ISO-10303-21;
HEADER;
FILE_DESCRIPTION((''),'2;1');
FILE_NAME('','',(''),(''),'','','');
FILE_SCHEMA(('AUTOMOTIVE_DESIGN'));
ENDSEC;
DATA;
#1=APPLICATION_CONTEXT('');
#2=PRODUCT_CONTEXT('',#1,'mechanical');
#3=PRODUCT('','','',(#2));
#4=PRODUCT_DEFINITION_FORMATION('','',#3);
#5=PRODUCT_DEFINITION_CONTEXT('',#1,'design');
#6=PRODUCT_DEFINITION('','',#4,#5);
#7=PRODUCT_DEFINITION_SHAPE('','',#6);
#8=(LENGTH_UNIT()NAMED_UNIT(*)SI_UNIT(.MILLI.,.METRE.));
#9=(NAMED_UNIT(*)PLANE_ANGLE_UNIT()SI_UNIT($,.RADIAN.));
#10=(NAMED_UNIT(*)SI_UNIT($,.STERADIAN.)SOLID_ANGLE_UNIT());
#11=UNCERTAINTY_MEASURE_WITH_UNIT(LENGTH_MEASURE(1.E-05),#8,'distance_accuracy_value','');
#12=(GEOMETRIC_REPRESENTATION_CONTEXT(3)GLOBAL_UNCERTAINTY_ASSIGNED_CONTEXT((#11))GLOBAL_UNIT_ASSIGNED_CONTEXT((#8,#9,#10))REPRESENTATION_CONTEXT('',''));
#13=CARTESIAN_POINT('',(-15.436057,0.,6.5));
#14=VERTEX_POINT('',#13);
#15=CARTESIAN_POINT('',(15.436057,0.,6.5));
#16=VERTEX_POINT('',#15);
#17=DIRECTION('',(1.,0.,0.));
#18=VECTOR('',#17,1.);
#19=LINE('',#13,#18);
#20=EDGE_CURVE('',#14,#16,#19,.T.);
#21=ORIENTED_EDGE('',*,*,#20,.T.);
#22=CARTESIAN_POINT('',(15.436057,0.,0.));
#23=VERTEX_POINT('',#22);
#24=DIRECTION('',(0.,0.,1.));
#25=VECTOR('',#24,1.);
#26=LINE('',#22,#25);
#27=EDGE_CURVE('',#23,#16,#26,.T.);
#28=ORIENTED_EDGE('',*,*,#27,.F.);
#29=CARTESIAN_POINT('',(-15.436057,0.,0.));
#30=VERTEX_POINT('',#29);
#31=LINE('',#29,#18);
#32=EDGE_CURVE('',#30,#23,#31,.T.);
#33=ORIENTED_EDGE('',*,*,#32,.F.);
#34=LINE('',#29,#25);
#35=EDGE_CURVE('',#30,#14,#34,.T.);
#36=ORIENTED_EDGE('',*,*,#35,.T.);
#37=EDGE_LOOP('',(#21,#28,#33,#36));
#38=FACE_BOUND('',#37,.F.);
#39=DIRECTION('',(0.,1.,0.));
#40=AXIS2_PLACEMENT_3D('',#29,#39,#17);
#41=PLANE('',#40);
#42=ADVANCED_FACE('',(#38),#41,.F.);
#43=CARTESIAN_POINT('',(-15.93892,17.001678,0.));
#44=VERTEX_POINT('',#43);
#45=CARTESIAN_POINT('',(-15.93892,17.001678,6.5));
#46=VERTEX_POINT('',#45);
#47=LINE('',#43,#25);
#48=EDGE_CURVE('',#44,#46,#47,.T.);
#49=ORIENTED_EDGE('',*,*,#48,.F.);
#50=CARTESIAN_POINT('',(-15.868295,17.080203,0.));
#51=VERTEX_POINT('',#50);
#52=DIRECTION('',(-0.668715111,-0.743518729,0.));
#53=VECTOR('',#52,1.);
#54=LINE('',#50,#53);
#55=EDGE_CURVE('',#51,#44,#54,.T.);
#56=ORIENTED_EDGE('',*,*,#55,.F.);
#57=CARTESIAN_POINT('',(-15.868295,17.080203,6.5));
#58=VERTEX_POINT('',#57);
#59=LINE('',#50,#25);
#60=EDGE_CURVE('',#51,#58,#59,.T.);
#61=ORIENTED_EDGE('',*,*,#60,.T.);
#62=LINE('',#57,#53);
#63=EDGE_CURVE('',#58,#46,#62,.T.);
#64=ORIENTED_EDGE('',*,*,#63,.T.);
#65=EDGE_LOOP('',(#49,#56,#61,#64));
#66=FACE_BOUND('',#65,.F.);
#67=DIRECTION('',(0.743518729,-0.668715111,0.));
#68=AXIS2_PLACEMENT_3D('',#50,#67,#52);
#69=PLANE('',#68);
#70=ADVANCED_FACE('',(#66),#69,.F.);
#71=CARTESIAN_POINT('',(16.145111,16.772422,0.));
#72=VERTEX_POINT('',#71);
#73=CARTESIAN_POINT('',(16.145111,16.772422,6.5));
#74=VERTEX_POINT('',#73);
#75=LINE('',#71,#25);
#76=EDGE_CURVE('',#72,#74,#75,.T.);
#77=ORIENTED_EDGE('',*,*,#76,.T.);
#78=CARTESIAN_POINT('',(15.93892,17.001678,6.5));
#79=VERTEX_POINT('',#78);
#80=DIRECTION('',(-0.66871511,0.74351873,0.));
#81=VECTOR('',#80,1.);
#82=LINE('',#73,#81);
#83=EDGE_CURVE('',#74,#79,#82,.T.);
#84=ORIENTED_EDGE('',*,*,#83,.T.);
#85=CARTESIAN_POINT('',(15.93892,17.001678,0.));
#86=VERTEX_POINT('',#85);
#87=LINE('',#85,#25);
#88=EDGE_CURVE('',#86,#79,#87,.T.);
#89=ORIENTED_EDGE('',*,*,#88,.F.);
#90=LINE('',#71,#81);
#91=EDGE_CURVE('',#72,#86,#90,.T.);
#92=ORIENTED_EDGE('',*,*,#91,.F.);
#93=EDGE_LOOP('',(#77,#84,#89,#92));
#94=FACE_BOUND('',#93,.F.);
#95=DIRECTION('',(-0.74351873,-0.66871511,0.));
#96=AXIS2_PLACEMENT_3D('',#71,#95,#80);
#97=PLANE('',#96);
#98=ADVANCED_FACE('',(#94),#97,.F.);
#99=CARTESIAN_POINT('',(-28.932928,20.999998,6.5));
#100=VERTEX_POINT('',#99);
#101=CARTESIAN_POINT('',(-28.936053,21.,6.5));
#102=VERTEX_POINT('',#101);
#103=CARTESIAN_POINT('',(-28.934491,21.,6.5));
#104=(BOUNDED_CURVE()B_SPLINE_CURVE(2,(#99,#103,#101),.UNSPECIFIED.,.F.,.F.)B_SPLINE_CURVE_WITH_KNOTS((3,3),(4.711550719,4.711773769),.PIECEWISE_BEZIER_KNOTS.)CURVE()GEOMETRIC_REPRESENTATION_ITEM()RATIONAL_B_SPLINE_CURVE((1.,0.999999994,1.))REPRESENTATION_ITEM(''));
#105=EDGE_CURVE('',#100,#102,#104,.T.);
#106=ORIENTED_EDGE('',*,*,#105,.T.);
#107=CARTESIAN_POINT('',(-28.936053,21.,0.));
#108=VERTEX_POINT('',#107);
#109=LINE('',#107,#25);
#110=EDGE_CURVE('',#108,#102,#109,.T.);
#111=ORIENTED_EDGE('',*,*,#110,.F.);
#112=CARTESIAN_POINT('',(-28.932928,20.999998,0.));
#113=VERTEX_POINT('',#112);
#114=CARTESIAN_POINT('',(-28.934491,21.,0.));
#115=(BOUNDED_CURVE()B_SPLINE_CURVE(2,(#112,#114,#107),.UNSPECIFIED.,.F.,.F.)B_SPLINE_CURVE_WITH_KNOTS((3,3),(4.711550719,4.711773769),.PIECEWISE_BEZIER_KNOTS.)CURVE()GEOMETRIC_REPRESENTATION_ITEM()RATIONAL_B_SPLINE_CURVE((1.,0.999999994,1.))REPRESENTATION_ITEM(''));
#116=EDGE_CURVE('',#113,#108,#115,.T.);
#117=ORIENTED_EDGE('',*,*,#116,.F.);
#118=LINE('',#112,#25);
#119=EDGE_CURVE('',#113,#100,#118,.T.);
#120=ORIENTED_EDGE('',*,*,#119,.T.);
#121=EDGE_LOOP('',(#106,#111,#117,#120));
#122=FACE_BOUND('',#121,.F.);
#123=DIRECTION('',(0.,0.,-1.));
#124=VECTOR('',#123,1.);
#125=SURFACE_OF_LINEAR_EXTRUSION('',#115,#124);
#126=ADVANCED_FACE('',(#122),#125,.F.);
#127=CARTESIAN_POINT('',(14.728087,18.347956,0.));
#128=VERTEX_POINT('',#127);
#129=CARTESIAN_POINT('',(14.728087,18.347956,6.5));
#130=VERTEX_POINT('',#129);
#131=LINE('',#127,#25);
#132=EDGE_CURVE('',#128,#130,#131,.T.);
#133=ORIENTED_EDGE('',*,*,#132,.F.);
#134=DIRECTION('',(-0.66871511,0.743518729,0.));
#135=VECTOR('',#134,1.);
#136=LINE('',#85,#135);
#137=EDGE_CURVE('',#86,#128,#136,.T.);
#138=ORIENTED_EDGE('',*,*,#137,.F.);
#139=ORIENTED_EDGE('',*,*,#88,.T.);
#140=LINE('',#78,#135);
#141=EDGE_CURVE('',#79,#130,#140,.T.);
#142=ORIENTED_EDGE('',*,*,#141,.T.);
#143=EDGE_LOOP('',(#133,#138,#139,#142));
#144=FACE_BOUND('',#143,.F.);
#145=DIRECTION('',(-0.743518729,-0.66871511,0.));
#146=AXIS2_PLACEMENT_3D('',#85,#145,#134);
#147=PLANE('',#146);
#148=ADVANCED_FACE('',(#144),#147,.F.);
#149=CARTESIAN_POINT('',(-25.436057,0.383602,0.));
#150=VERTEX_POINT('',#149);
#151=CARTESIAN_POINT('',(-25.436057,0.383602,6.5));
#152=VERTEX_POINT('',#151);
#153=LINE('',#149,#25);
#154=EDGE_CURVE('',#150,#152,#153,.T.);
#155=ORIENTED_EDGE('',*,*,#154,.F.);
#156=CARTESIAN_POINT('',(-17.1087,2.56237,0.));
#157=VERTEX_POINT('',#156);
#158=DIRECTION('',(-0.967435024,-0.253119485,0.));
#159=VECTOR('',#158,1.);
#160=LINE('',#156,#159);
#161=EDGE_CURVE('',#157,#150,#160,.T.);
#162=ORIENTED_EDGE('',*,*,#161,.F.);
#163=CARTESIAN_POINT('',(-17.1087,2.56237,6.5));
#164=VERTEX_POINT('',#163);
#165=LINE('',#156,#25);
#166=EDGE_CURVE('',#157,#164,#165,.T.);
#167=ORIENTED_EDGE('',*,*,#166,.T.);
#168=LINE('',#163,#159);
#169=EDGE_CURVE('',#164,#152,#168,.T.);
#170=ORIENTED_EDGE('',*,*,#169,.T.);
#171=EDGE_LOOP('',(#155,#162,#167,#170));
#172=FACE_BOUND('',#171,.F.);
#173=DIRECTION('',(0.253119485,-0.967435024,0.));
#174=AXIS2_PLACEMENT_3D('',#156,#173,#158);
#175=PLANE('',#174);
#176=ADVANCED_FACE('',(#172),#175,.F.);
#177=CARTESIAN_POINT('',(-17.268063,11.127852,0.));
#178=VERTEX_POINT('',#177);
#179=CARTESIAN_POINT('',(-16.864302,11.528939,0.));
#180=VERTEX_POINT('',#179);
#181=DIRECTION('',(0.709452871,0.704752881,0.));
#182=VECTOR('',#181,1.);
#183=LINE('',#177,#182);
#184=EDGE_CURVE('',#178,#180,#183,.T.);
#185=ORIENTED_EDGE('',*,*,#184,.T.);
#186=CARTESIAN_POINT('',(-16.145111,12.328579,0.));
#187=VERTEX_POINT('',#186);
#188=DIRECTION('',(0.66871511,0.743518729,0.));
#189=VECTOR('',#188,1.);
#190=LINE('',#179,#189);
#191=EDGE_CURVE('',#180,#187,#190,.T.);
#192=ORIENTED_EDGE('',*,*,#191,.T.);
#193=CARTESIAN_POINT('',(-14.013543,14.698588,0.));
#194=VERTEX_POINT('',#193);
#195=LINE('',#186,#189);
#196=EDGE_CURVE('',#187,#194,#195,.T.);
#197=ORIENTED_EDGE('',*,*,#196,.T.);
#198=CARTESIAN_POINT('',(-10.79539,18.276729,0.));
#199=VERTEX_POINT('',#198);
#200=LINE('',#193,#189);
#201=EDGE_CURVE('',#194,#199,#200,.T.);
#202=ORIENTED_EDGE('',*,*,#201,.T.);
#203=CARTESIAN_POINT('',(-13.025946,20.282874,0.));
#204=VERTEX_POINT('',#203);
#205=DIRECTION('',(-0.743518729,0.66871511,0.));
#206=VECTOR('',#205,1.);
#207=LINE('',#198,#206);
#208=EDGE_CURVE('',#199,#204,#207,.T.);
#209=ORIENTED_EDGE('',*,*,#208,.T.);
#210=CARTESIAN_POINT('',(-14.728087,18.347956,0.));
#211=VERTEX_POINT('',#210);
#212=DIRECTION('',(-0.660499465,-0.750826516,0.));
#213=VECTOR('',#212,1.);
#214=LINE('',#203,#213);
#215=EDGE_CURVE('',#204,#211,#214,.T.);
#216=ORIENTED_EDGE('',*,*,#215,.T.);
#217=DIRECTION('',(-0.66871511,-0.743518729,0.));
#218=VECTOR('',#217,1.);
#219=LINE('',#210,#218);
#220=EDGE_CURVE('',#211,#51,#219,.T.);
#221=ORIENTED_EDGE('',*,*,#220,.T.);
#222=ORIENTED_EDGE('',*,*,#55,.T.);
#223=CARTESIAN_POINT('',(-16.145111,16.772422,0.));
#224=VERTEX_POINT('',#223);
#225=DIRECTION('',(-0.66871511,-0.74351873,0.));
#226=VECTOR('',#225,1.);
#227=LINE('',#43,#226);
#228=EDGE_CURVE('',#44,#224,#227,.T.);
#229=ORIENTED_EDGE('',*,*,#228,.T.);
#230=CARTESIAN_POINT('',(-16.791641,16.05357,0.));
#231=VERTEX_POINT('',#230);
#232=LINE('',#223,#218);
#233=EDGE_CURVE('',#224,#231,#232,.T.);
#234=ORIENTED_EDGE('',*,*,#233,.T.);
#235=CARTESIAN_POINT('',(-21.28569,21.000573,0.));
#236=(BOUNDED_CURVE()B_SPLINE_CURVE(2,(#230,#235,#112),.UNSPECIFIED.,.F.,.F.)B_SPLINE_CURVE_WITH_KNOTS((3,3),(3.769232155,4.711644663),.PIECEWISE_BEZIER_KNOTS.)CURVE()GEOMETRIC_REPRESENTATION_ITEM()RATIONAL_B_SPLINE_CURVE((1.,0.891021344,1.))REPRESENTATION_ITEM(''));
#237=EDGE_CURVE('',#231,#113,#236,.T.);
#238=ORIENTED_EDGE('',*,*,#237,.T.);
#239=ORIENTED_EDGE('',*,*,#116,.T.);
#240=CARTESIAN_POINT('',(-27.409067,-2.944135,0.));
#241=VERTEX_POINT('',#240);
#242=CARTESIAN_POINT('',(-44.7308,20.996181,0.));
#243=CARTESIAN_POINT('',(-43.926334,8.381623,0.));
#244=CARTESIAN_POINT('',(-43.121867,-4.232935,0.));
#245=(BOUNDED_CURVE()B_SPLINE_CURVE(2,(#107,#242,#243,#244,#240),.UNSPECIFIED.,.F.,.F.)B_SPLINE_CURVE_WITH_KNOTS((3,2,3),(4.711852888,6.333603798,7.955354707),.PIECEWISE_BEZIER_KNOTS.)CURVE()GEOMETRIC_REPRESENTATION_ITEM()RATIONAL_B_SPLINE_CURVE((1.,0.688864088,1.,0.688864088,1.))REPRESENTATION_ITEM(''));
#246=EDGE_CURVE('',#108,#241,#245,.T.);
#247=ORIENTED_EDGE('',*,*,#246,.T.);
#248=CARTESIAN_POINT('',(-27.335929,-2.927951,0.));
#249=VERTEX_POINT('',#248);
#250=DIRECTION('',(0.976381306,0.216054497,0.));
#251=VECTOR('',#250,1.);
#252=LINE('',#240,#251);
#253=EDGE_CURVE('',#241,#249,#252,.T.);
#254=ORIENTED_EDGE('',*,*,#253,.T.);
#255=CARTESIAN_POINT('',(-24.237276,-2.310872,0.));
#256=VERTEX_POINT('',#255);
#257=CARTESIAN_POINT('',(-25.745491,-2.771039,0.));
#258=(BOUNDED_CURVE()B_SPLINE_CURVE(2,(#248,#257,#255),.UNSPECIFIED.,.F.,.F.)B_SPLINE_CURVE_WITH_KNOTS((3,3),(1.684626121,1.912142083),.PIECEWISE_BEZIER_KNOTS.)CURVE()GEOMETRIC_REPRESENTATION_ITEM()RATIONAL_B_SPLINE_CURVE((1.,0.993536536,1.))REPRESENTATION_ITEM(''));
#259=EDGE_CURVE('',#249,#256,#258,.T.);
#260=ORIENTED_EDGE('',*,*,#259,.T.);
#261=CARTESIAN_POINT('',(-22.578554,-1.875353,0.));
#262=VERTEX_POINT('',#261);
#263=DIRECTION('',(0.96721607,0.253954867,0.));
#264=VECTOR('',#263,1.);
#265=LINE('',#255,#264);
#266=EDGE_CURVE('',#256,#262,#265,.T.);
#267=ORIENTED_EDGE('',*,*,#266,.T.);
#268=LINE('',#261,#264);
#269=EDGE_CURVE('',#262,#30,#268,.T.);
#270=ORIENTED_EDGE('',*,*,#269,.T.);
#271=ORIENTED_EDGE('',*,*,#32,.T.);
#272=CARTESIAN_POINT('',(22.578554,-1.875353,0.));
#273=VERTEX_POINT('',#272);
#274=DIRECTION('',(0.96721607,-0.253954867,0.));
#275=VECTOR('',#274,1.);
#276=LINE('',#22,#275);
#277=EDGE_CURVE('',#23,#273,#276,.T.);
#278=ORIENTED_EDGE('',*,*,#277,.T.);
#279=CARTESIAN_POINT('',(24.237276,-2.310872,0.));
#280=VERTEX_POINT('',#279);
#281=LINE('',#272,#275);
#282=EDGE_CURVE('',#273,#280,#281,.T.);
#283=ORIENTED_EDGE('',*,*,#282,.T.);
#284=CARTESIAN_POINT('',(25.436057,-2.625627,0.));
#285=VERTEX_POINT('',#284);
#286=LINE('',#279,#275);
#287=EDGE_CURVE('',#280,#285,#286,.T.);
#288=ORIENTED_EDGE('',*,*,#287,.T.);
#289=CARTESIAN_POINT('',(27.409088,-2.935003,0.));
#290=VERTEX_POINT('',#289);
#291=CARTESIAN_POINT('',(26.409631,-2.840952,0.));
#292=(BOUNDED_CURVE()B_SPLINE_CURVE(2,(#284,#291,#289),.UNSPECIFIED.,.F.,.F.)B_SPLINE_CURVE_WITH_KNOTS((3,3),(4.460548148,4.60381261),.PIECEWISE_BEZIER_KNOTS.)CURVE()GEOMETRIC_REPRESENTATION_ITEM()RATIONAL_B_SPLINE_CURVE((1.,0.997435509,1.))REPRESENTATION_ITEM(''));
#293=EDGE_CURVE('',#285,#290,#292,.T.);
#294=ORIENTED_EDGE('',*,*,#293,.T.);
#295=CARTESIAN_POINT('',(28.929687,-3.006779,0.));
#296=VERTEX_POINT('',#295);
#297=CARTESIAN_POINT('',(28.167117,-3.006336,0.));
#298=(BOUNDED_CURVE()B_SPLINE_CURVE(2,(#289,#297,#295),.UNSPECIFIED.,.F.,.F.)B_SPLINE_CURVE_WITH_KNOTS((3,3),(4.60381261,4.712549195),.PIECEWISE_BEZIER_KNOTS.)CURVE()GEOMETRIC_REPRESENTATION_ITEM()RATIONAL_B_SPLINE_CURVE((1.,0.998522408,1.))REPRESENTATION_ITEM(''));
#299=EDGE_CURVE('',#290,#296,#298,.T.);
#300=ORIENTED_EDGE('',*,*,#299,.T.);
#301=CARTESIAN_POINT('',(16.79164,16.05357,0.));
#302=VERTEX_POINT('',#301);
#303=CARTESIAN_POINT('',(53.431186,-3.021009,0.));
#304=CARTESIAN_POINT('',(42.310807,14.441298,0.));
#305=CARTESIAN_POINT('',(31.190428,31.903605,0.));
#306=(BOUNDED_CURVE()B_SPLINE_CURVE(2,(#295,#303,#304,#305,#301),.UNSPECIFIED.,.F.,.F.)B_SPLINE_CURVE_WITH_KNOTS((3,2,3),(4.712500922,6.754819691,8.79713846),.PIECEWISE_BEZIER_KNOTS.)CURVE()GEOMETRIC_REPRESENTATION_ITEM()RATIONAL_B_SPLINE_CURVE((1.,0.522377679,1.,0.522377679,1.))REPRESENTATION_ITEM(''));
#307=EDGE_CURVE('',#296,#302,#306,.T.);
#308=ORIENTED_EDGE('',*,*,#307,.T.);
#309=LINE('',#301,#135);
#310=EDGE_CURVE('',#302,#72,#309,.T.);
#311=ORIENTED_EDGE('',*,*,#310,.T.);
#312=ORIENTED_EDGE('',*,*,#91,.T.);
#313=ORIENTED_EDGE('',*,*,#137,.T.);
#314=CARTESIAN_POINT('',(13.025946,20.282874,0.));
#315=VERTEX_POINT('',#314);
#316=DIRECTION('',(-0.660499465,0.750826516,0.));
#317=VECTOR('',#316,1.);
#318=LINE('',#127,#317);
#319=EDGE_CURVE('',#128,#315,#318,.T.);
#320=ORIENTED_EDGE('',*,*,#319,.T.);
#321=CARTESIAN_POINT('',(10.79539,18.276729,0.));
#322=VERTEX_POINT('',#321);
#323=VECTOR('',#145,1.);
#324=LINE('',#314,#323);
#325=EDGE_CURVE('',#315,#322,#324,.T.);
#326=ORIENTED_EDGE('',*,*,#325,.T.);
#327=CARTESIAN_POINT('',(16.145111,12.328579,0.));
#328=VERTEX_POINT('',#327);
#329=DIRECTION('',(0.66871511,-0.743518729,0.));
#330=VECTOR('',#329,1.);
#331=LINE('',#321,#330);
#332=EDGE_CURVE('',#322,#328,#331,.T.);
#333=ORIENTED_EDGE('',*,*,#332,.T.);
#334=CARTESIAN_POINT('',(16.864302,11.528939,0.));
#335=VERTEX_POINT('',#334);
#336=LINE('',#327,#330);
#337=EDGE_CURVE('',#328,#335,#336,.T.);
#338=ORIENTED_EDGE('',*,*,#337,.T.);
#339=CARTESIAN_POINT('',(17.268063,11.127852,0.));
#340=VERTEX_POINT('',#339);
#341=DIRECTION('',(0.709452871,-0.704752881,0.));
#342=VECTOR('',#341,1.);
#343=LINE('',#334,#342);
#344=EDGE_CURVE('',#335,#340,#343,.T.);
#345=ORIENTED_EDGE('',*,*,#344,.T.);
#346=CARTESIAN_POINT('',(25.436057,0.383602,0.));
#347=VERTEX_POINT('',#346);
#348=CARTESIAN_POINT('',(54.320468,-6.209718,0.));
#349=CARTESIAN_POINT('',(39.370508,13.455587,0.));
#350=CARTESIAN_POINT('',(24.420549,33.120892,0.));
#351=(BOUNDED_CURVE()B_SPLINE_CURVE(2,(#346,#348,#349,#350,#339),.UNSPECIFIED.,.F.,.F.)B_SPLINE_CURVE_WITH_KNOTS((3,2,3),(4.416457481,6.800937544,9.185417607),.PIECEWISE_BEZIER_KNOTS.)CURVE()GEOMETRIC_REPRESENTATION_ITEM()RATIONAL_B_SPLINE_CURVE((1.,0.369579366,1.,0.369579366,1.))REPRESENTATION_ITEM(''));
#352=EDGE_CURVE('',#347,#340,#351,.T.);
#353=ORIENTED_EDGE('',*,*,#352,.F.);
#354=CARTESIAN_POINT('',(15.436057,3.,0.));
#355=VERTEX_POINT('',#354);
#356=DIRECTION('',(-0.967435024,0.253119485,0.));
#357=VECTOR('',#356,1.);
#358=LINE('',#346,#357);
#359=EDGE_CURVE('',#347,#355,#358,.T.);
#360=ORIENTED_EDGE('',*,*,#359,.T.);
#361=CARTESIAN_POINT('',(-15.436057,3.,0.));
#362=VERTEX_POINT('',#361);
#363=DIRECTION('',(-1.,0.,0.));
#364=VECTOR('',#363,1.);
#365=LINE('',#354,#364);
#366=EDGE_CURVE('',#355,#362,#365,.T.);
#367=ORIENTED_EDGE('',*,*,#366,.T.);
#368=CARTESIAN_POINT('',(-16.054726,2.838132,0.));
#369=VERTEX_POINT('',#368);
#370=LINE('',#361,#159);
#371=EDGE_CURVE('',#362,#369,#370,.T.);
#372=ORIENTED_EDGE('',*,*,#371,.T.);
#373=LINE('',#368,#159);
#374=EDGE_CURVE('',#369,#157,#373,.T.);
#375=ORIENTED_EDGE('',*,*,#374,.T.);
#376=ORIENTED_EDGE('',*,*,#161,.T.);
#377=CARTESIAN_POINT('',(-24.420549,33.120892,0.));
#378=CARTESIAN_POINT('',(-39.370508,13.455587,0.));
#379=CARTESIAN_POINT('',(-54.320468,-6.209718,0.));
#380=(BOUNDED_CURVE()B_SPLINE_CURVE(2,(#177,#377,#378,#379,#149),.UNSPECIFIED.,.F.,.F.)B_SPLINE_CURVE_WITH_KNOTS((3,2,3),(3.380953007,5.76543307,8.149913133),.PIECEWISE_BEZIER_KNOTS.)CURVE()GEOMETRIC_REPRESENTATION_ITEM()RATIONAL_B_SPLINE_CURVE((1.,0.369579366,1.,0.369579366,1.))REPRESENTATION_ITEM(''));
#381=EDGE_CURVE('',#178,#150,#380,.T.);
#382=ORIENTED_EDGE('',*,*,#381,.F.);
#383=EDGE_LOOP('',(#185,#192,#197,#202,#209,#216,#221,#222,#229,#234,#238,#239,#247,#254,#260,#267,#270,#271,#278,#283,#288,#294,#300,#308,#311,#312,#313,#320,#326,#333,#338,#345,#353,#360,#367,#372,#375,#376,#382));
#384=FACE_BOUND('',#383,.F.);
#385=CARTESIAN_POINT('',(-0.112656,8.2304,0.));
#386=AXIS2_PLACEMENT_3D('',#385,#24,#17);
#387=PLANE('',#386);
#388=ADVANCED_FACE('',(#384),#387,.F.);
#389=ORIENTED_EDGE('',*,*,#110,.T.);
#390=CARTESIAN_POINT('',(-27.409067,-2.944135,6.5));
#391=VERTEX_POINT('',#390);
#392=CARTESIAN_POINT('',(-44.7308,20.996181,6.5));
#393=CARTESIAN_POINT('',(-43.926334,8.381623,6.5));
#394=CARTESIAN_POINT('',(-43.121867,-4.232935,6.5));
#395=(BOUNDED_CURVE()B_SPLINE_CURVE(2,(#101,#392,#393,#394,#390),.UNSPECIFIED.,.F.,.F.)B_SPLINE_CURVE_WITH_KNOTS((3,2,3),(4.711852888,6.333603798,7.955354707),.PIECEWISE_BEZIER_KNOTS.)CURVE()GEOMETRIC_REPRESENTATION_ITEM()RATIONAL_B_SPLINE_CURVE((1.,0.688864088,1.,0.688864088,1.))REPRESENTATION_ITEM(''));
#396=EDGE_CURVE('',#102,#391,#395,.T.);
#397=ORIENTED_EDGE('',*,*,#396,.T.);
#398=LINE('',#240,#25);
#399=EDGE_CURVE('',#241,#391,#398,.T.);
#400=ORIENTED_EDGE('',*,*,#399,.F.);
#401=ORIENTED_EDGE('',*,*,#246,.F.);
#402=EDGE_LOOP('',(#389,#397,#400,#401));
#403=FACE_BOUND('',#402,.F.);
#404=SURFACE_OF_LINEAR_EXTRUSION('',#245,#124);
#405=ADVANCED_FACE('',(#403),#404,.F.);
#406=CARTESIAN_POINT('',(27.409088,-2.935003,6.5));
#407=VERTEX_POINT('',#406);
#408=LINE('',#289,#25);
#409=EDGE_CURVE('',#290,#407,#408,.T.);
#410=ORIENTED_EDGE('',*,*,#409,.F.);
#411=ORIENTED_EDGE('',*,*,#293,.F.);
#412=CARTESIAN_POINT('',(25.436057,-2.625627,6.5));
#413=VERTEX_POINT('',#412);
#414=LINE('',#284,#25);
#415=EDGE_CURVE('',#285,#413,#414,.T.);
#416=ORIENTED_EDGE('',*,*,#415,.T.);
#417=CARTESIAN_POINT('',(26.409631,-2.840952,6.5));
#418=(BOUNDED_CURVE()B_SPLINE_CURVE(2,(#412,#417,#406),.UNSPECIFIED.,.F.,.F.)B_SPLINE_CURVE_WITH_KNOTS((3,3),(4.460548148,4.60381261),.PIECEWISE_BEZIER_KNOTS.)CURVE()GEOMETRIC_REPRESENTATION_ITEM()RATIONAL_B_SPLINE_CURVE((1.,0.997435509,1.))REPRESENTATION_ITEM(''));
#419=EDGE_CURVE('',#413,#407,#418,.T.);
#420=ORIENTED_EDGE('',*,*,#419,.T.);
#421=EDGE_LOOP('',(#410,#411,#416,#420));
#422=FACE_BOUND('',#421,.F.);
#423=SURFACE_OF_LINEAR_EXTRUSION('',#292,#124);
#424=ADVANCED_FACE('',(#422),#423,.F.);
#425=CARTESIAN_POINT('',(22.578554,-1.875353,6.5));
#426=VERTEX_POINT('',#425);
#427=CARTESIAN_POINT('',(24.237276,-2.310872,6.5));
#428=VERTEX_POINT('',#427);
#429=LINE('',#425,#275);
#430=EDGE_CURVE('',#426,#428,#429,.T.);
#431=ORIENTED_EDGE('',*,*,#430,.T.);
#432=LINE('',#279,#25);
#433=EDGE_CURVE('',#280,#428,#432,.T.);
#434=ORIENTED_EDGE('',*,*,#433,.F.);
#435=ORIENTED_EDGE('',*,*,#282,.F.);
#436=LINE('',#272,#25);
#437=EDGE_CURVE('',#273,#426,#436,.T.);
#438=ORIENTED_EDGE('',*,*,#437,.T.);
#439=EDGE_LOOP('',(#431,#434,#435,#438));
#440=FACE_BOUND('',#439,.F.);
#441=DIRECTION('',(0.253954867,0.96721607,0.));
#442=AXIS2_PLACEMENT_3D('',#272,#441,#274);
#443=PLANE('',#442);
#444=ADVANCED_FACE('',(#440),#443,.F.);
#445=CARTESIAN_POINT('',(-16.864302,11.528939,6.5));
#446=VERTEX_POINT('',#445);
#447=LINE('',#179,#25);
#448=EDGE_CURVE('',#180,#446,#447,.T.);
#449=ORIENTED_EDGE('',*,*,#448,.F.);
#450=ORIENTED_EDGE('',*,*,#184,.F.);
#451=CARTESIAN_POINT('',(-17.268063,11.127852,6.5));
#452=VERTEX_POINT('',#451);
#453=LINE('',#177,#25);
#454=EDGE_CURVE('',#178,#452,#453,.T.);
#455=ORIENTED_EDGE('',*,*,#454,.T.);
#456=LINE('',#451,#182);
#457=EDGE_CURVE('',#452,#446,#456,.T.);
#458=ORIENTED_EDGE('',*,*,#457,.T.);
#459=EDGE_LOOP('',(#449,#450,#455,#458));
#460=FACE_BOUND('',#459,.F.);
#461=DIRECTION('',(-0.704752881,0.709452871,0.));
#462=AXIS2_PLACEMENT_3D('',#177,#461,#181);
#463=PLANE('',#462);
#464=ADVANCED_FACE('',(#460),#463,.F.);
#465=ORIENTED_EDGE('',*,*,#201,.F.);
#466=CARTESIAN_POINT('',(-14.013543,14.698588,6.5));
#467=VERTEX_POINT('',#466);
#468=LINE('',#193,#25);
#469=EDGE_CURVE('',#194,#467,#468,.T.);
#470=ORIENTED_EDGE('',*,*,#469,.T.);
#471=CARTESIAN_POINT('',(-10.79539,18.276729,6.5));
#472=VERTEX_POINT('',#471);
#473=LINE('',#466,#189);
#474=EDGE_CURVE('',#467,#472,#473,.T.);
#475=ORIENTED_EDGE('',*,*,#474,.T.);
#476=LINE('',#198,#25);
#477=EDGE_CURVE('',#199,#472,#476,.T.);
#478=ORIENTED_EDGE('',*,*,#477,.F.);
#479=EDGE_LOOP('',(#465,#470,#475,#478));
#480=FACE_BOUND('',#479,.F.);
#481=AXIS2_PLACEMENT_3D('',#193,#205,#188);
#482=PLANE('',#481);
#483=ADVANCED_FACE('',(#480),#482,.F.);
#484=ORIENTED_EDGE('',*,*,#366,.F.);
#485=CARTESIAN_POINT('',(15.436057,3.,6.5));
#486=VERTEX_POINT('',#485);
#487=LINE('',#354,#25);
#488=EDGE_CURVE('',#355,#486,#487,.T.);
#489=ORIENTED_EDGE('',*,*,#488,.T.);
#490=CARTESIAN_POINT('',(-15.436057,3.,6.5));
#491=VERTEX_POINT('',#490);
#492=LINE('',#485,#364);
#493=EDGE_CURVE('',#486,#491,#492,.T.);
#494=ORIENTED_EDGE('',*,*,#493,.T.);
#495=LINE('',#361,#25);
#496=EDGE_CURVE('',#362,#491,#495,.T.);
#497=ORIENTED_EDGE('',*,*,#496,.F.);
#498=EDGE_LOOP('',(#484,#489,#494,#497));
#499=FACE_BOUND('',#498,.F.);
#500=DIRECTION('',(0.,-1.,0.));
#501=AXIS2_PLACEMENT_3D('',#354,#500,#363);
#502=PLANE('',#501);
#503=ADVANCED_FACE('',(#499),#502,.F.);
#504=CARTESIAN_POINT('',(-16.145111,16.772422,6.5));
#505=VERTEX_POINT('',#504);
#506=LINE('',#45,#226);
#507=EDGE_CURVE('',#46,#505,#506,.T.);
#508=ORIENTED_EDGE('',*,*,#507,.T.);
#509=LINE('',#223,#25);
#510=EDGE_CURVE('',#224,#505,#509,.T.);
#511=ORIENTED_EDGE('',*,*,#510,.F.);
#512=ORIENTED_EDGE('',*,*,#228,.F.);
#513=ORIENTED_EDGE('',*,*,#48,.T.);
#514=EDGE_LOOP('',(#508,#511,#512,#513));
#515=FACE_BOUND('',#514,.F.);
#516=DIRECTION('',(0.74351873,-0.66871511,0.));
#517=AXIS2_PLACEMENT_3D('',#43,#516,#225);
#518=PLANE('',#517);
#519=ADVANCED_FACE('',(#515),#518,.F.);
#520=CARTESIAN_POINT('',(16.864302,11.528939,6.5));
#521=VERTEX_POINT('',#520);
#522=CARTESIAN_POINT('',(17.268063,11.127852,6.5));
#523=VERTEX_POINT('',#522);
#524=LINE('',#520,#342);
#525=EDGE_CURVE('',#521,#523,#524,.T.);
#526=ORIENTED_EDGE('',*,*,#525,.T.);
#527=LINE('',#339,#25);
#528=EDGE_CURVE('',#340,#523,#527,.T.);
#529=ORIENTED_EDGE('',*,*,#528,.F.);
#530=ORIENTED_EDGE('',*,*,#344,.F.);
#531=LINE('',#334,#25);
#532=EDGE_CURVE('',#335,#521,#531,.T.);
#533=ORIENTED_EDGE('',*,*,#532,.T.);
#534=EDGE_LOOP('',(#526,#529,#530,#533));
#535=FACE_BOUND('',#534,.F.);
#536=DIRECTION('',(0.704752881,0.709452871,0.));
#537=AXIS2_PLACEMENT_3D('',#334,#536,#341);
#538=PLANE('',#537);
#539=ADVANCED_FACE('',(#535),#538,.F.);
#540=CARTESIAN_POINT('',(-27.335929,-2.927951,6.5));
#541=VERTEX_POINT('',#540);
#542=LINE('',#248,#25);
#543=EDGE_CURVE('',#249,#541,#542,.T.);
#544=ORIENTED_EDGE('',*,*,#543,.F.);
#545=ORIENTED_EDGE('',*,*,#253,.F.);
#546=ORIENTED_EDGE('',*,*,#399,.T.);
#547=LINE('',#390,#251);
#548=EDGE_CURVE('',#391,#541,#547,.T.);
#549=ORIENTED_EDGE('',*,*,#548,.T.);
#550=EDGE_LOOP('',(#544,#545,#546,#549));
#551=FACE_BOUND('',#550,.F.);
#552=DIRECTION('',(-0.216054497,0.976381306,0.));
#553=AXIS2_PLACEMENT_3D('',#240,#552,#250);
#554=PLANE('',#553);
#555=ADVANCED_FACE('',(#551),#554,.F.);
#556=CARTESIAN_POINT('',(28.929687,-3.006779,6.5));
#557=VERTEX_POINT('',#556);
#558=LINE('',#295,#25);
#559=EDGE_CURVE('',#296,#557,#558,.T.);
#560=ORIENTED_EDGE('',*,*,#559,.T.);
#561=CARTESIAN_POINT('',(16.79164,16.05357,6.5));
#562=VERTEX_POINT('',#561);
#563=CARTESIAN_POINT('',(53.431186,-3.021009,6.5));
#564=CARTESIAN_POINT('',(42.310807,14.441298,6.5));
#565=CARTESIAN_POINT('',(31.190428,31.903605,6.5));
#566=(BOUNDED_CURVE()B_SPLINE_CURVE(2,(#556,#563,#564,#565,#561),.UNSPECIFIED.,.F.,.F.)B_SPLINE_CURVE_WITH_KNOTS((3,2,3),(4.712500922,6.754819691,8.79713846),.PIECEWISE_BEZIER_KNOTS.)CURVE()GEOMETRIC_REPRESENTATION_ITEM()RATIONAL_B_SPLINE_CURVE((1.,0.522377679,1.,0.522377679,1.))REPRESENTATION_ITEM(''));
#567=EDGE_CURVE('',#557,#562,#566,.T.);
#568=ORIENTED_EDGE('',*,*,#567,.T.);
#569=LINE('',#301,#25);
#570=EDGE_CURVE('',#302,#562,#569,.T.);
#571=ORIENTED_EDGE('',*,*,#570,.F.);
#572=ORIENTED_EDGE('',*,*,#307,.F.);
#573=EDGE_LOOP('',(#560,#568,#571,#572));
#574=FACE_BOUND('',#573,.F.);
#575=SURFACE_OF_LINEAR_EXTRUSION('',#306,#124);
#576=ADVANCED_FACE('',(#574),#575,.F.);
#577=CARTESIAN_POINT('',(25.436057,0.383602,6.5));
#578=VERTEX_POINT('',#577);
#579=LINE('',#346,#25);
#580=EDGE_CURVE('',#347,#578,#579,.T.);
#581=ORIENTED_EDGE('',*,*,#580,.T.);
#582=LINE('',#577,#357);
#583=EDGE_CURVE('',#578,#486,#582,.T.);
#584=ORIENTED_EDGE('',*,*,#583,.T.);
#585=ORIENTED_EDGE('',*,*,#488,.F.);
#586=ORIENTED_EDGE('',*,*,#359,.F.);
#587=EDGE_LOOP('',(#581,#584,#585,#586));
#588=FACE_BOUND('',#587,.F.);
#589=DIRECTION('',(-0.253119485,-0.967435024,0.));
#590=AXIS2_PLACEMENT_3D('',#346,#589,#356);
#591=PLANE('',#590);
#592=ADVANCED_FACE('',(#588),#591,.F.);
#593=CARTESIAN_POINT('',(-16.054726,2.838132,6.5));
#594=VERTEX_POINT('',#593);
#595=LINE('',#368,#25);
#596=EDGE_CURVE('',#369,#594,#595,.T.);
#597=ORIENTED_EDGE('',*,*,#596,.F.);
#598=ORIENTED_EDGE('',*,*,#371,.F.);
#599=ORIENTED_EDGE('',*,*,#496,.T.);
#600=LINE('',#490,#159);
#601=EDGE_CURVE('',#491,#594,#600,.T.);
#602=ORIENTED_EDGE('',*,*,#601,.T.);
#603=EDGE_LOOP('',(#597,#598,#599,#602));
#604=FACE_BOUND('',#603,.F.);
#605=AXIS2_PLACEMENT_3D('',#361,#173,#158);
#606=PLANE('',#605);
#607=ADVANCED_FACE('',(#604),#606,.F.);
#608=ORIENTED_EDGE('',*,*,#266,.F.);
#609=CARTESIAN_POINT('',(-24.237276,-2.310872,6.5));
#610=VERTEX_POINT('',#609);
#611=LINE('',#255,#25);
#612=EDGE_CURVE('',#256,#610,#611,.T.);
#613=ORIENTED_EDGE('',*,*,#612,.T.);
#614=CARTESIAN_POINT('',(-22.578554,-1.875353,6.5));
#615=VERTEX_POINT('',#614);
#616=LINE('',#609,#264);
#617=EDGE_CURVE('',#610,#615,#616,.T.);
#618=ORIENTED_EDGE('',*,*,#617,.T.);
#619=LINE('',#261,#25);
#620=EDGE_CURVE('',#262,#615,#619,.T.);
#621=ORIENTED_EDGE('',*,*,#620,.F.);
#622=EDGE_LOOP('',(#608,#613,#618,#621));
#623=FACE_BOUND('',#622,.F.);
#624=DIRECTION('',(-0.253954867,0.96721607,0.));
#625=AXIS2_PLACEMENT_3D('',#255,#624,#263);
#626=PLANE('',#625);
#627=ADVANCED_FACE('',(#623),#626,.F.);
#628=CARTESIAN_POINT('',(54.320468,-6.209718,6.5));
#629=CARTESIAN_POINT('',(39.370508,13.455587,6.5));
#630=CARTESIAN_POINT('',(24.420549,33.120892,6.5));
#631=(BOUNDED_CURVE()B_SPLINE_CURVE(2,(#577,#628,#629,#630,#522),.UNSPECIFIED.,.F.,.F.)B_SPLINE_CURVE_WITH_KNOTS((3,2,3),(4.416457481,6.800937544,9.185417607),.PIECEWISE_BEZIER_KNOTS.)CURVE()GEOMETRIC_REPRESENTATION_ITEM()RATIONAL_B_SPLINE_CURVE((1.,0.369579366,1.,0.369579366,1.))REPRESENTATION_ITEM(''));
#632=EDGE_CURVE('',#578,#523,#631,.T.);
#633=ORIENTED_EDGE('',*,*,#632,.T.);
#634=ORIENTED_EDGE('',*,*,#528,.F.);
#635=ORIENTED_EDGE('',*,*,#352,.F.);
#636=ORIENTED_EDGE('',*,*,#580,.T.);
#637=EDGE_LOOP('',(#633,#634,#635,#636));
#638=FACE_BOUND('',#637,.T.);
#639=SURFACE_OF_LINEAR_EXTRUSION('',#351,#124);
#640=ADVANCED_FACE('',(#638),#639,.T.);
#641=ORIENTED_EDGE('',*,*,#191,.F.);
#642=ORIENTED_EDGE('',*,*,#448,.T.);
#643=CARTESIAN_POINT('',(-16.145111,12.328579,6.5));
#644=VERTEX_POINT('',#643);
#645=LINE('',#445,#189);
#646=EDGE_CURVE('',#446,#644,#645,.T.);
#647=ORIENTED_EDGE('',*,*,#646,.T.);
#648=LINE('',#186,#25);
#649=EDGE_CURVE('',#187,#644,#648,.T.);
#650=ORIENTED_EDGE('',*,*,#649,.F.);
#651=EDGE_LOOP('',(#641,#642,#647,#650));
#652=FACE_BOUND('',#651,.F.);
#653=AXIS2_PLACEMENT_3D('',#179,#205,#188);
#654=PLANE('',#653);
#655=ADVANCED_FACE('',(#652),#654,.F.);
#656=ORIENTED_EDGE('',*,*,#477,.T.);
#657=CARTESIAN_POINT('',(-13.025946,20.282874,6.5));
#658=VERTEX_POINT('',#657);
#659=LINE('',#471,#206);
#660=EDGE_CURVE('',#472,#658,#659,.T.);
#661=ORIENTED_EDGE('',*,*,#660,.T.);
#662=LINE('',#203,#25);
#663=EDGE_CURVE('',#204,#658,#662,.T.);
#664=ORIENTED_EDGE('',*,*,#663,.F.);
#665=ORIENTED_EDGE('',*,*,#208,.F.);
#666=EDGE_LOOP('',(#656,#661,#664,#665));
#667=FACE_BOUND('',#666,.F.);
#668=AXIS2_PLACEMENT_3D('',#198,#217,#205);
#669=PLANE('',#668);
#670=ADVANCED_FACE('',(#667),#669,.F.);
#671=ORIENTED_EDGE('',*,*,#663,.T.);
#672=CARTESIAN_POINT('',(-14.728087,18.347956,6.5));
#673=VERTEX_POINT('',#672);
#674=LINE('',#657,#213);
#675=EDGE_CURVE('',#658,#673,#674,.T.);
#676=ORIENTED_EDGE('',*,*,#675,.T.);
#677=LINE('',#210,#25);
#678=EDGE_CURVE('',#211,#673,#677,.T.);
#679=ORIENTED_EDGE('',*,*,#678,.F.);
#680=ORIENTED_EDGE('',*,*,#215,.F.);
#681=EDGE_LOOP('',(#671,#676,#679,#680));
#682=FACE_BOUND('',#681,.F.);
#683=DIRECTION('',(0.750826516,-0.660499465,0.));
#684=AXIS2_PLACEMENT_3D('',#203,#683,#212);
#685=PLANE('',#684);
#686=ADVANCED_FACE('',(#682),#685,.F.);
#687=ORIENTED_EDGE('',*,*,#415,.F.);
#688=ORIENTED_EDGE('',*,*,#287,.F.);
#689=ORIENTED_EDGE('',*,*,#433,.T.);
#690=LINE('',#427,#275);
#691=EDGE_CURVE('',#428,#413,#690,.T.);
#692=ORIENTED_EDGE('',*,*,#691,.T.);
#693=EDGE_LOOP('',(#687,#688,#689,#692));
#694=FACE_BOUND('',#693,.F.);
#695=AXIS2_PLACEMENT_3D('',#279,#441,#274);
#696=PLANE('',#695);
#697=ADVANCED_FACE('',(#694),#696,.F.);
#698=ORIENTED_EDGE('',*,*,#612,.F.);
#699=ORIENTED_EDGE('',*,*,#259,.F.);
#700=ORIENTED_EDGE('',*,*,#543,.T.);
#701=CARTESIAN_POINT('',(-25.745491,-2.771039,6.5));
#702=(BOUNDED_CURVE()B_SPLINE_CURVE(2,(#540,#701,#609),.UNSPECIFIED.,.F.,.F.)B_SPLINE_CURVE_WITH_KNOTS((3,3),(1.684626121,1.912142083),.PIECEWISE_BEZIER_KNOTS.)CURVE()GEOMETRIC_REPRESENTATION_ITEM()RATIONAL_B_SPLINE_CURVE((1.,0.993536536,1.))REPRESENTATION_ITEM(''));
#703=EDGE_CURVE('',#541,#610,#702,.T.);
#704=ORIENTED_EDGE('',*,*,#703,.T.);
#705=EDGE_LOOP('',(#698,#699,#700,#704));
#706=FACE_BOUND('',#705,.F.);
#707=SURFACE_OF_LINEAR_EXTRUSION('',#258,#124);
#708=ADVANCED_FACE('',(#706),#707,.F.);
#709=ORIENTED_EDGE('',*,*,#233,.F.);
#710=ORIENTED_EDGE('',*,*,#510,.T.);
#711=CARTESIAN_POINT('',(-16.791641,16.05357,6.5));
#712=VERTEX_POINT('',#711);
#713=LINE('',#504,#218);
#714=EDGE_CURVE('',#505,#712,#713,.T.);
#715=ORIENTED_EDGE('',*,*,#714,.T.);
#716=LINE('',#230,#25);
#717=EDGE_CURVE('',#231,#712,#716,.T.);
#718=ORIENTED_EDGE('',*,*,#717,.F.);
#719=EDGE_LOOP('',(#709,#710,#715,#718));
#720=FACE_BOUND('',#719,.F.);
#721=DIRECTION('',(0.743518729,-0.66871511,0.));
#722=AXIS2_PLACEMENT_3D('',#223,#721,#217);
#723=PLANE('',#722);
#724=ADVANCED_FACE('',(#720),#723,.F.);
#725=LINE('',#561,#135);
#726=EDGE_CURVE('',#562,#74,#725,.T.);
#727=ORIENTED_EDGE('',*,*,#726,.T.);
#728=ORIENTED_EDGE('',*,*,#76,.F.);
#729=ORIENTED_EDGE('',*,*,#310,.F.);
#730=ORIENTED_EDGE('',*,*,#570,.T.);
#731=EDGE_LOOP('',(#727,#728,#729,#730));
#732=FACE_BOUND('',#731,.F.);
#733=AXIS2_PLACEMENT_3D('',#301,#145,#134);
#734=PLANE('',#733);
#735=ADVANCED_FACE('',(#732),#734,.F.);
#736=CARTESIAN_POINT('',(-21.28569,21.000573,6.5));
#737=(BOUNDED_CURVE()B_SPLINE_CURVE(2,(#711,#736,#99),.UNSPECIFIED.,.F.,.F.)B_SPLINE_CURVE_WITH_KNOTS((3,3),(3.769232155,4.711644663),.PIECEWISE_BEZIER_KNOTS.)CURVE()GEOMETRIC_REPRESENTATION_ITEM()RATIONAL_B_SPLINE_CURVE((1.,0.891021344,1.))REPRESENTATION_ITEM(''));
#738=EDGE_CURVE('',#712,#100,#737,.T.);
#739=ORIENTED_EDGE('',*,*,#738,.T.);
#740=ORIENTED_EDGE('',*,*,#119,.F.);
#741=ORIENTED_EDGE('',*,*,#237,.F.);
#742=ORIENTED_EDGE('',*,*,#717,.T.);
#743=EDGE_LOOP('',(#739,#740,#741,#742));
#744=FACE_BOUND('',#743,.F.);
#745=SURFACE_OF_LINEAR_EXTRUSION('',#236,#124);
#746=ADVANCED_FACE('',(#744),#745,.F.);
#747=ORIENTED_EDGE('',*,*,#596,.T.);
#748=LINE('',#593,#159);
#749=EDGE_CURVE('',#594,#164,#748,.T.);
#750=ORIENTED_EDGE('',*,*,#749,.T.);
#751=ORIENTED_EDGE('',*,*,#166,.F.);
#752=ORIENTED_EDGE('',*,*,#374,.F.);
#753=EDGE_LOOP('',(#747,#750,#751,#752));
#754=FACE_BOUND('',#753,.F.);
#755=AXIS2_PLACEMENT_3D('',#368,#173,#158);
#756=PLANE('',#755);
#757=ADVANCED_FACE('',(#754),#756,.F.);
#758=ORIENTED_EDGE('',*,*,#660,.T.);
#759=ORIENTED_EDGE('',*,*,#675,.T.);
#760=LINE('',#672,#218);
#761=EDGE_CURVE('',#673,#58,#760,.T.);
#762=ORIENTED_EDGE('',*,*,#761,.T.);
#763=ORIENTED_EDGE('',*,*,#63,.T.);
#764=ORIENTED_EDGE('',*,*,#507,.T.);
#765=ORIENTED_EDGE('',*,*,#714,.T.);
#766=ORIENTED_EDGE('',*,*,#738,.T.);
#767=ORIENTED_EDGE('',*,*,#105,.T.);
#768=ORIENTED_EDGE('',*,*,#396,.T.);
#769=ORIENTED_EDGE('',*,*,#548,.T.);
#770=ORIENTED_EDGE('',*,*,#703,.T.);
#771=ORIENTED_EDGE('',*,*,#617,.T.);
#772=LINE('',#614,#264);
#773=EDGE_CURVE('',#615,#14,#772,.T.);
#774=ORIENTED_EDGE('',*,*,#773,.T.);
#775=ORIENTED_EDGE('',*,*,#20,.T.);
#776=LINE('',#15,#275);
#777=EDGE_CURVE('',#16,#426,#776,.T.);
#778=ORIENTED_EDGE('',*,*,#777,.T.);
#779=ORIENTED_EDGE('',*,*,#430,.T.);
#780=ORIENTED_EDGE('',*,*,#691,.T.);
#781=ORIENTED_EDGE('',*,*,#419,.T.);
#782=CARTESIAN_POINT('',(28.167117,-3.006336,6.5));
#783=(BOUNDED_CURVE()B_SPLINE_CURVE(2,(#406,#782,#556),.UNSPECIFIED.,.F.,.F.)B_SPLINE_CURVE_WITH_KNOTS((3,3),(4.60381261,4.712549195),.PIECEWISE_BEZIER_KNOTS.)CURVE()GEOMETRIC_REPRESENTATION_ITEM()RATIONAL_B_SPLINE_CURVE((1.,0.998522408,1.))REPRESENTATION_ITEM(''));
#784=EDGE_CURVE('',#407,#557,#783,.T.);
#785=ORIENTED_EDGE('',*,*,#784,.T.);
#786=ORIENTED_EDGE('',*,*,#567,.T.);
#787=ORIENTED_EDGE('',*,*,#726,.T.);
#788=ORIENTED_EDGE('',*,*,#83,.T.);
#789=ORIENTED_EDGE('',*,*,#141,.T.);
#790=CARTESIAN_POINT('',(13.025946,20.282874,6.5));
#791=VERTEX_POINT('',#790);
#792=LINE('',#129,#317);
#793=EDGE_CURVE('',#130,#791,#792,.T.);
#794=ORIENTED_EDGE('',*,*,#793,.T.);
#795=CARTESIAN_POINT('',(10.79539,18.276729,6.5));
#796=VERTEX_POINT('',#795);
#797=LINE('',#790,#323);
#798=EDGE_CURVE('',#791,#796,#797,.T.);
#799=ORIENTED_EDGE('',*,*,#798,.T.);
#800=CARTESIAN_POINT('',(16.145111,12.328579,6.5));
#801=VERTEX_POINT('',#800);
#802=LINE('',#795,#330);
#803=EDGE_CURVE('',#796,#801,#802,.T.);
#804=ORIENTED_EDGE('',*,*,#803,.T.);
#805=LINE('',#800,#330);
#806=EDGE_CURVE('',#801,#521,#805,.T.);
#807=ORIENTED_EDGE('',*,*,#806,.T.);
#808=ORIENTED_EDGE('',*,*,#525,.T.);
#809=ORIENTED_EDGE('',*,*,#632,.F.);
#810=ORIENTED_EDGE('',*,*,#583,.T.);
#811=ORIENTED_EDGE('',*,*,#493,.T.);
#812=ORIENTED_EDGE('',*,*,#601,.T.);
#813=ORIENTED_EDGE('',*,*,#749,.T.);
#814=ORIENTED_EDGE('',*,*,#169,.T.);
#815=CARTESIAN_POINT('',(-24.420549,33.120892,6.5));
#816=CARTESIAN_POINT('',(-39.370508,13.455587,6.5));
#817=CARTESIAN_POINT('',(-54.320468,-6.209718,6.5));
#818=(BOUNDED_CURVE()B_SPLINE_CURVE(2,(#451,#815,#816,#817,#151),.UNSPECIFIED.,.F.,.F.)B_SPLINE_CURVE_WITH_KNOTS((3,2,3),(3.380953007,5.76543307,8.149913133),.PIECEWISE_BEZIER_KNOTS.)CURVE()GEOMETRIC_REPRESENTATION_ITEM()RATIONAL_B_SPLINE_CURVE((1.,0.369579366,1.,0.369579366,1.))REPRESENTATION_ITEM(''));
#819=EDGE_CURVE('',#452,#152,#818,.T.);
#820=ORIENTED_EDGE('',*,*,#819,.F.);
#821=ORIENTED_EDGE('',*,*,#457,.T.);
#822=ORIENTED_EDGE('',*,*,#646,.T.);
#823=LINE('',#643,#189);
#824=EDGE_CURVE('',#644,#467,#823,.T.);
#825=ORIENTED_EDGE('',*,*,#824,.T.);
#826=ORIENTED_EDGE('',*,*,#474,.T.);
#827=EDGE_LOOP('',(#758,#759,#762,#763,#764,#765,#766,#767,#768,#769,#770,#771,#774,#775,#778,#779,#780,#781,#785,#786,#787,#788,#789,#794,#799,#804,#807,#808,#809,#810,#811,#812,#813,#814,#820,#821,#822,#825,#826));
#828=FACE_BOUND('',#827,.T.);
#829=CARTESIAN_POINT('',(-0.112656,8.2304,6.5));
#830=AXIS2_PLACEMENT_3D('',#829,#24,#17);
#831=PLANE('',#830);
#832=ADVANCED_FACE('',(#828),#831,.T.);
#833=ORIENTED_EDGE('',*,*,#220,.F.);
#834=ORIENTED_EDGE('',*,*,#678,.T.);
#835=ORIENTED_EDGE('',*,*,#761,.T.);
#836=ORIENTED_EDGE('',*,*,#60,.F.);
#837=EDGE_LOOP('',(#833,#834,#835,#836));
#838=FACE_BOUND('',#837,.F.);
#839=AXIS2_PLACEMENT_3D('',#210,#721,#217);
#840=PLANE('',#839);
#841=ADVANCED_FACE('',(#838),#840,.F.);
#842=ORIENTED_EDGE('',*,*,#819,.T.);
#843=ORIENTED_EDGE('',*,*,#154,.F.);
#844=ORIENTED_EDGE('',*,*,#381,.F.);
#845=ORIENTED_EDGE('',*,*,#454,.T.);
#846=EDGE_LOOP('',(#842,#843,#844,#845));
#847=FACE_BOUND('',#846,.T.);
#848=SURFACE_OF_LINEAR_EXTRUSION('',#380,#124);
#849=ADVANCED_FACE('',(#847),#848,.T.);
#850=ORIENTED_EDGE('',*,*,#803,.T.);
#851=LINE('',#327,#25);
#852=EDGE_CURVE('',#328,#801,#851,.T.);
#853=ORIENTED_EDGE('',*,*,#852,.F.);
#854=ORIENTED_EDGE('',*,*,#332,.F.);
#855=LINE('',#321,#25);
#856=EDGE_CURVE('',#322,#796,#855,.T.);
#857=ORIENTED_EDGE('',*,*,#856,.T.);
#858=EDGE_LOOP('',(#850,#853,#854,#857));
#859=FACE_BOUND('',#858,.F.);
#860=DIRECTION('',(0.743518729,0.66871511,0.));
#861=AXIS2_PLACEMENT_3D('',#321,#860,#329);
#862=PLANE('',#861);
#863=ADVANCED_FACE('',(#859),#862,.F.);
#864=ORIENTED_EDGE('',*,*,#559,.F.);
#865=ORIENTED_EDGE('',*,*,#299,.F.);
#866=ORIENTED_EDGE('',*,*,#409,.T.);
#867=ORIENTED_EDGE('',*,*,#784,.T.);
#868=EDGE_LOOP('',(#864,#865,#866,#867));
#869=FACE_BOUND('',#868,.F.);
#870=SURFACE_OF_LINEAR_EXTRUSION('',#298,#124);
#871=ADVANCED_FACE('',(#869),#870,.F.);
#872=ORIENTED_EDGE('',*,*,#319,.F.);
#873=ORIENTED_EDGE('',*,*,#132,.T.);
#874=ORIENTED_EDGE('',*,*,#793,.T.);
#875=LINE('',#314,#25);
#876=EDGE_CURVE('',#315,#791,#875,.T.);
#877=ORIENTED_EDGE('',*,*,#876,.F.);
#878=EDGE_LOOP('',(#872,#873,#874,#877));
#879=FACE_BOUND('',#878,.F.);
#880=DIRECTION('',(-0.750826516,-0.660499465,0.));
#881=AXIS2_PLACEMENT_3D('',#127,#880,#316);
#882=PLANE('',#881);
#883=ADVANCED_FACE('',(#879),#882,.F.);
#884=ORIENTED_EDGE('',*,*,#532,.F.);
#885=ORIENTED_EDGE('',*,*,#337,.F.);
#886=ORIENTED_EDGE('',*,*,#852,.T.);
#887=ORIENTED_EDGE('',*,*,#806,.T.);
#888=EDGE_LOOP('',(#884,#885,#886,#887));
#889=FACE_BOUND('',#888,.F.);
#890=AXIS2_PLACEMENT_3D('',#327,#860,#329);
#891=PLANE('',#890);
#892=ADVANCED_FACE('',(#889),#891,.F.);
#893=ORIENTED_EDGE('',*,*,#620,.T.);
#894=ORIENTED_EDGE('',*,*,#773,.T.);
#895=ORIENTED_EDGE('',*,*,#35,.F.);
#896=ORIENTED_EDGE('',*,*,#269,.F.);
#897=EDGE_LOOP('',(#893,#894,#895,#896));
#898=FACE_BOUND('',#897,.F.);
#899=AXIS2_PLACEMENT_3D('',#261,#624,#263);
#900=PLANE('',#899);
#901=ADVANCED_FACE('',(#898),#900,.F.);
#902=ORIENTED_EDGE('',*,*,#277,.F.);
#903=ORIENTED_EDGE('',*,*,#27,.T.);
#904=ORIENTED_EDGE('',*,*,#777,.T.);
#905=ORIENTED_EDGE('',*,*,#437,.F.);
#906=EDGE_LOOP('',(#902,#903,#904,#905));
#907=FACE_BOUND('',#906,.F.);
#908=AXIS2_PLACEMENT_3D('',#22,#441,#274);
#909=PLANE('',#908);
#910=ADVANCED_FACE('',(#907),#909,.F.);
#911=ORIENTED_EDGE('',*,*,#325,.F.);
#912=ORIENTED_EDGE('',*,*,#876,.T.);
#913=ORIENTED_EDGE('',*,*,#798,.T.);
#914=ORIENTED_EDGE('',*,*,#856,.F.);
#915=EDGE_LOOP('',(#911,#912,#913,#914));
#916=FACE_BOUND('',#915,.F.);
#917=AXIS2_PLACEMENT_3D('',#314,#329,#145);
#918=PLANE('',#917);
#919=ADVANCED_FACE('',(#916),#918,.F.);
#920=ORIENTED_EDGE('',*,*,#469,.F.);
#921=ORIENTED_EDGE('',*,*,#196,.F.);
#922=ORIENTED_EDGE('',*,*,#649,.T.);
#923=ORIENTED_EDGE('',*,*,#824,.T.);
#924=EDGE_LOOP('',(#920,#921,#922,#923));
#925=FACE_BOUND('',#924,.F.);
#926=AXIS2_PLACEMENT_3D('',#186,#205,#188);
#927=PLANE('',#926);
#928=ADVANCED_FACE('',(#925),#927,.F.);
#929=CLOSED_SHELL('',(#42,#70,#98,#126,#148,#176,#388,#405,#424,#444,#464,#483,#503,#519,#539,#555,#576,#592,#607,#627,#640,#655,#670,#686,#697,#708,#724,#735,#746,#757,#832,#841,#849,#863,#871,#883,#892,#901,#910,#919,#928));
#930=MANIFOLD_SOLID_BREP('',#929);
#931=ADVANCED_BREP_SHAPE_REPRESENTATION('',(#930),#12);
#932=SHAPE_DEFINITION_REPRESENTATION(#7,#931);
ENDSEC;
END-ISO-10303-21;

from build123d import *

# Parameters (mm, degrees)
F1_DEPTH = 6.5


# Not quite as in the source:
# - ends of sketch curves that miss each other by under 0.0002 mm in the source are joined


with BuildPart() as f1:
    # F0 (on Top) → F1 (new body)
    with BuildSketch(Plane.XY):
        with BuildLine():
            Line((-15.4360572198, 0), (0, 0))
            Line((0, 0), (15.4360572198, 0))
            Line((15.4360572198, 0), (22.5785540972, -1.8753532969))
            Line((22.5785540972, -1.8753532969), (24.2372755143, -2.3108716782))
            Line((24.2372755143, -2.3108716782), (25.4360572198, -2.6256270449))
            add(Edge.make_bspline(
                [(25.4360572198, -2.6256270449), (26.409631126, -2.8409522067), (27.4090879072, -2.9350034665)],
                knots=[4.4605481479, 4.4605481479, 4.4605481479, 4.6038126101, 4.6038126101, 4.6038126101], degree=2, weights=[1, 0.9974355086, 1]))
            add(Edge.make_bspline(
                [(27.4090879072, -2.9350034665), (28.1671167574, -3.0063357838), (28.9296869951, -3.0067787163)],
                knots=[4.6038126101, 4.6038126101, 4.6038126101, 4.7125491946, 4.7125491946, 4.7125491946], degree=2, weights=[1, 0.9985224084, 1]))
            add(Edge.make_bspline(
                [(28.9296869951, -3.0067787163), (53.4311857774, -3.0210094859), (42.3108067868, 14.4412975805), (31.1904277962, 31.903604647), (16.7916403321, 16.0535704123)],
                knots=[4.7125009223, 4.7125009223, 4.7125009223, 6.754819691, 6.754819691, 8.7971384597, 8.7971384597, 8.7971384597], degree=2, weights=[1, 0.522377679, 1, 0.522377679, 1]))
            Line((16.7916403321, 16.0535704123), (16.1451111023, 16.7724215104))
            Line((16.1451111023, 16.7724215104), (15.9389197568, 17.0016777735))
            Line((15.9389197568, 17.0016777735), (14.7280874781, 18.3479558272))
            Line((14.7280874781, 18.3479558272), (13.025946407, 20.2828743527))
            Line((13.025946407, 20.2828743527), (10.7953902187, 18.2767290214))
            Line((10.7953902187, 18.2767290214), (16.1451111023, 12.3285791857))
            Line((16.1451111023, 12.3285791857), (16.8643018326, 11.528938547))
            Line((16.8643018326, 11.528938547), (17.2680627309, 11.127852488))
            add(Edge.make_bspline(
                [(25.4360572198, 0.3836022246), (54.3204678279, -6.2097181263), (39.370508439, 13.4555871478), (24.4205490501, 33.1208924219), (17.2680627309, 11.127852488)],
                knots=[4.4164574814, 4.4164574814, 4.4164574814, 6.8009375444, 6.8009375444, 9.1854176074, 9.1854176074, 9.1854176074], degree=2, weights=[1, 0.3695793658, 1, 0.3695793658, 1]))
            Line((25.4360572198, 0.3836022246), (15.4360572198, 3))
            Line((15.4360572198, 3), (0, 3))
            Line((0, 3), (-15.2705321592, 3))
            Line((-15.2705321592, 3), (-15.4360572198, 3))
            Line((-15.4360572198, 3), (-16.0547256122, 2.8381317394))
            Line((-16.0547256122, 2.8381317394), (-17.1087004648, 2.5623699935))
            Line((-17.1087004648, 2.5623699935), (-25.4360572198, 0.3836022246))
            add(Edge.make_bspline(
                [(-17.2680627309, 11.127852488), (-24.4205490501, 33.1208924219), (-39.370508439, 13.4555871478), (-54.3204678279, -6.2097181263), (-25.4360572198, 0.3836022246)],
                knots=[3.380953007, 3.380953007, 3.380953007, 5.76543307, 5.76543307, 8.149913133, 8.149913133, 8.149913133], degree=2, weights=[1, 0.3695793658, 1, 0.3695793658, 1]))
            Line((-17.2680627309, 11.127852488), (-16.8643018326, 11.528938547))
            Line((-16.8643018326, 11.528938547), (-16.1451111023, 12.3285791857))
            Line((-16.1451111023, 12.3285791857), (-14.013543256, 14.6985878667))
            Line((-14.013543256, 14.6985878667), (-10.7953902187, 18.2767290214))
            Line((-10.7953902187, 18.2767290214), (-13.025946407, 20.2828743527))
            Line((-13.025946407, 20.2828743527), (-14.7280874781, 18.3479558272))
            Line((-14.7280874781, 18.3479558272), (-15.8682951869, 17.0802025288))
            Line((-15.8682951869, 17.0802025288), (-15.9389197568, 17.0016777735))
            Line((-15.9389197568, 17.0016777735), (-16.1451111023, 16.7724215104))
            Line((-16.1451111023, 16.7724215104), (-16.7916406562, 16.0535700519))
            add(Edge.make_bspline(
                [(-16.7916406562, 16.0535700519), (-21.285689854, 21.0005729952), (-28.9329279759, 20.9999984796)],
                knots=[3.7692321546, 3.7692321546, 3.7692321546, 4.7116446629, 4.7116446629, 4.7116446629], degree=2, weights=[1, 0.8910213437, 1]))
            add(Edge.make_bspline(
                [(-28.9329279759, 20.9999984796), (-28.9344906831, 21.0000002986), (-28.9360533902, 21)],
                knots=[4.7115507193, 4.7115507193, 4.7115507193, 4.711773769, 4.711773769, 4.711773769], degree=2, weights=[1, 0.9999999938, 1]))
            add(Edge.make_bspline(
                [(-28.9360533902, 21), (-44.7308001421, 20.9961812437), (-43.9263336329, 8.3816232809), (-43.1218671236, -4.232934682), (-27.4090674102, -2.9441350843)],
                knots=[4.7118528883, 4.7118528883, 4.7118528883, 6.3336037978, 6.3336037978, 7.9553547073, 7.9553547073, 7.9553547073], degree=2, weights=[1, 0.6888640882, 1, 0.6888640882, 1]))
            Line((-27.4090674102, -2.9441350843), (-27.3359285804, -2.927950861))
            add(Edge.make_bspline(
                [(-27.3359285804, -2.927950861), (-25.7454911542, -2.7710392295), (-24.2372755143, -2.3108716782)],
                knots=[1.6846261213, 1.6846261213, 1.6846261213, 1.9121420834, 1.9121420834, 1.9121420834], degree=2, weights=[1, 0.9935365356, 1]))
            Line((-24.2372755143, -2.3108716782), (-22.5785540972, -1.8753532969))
            Line((-22.5785540972, -1.8753532969), (-15.4360572198, 0))
        make_face()
    extrude(amount=F1_DEPTH)


solid = f1.part
